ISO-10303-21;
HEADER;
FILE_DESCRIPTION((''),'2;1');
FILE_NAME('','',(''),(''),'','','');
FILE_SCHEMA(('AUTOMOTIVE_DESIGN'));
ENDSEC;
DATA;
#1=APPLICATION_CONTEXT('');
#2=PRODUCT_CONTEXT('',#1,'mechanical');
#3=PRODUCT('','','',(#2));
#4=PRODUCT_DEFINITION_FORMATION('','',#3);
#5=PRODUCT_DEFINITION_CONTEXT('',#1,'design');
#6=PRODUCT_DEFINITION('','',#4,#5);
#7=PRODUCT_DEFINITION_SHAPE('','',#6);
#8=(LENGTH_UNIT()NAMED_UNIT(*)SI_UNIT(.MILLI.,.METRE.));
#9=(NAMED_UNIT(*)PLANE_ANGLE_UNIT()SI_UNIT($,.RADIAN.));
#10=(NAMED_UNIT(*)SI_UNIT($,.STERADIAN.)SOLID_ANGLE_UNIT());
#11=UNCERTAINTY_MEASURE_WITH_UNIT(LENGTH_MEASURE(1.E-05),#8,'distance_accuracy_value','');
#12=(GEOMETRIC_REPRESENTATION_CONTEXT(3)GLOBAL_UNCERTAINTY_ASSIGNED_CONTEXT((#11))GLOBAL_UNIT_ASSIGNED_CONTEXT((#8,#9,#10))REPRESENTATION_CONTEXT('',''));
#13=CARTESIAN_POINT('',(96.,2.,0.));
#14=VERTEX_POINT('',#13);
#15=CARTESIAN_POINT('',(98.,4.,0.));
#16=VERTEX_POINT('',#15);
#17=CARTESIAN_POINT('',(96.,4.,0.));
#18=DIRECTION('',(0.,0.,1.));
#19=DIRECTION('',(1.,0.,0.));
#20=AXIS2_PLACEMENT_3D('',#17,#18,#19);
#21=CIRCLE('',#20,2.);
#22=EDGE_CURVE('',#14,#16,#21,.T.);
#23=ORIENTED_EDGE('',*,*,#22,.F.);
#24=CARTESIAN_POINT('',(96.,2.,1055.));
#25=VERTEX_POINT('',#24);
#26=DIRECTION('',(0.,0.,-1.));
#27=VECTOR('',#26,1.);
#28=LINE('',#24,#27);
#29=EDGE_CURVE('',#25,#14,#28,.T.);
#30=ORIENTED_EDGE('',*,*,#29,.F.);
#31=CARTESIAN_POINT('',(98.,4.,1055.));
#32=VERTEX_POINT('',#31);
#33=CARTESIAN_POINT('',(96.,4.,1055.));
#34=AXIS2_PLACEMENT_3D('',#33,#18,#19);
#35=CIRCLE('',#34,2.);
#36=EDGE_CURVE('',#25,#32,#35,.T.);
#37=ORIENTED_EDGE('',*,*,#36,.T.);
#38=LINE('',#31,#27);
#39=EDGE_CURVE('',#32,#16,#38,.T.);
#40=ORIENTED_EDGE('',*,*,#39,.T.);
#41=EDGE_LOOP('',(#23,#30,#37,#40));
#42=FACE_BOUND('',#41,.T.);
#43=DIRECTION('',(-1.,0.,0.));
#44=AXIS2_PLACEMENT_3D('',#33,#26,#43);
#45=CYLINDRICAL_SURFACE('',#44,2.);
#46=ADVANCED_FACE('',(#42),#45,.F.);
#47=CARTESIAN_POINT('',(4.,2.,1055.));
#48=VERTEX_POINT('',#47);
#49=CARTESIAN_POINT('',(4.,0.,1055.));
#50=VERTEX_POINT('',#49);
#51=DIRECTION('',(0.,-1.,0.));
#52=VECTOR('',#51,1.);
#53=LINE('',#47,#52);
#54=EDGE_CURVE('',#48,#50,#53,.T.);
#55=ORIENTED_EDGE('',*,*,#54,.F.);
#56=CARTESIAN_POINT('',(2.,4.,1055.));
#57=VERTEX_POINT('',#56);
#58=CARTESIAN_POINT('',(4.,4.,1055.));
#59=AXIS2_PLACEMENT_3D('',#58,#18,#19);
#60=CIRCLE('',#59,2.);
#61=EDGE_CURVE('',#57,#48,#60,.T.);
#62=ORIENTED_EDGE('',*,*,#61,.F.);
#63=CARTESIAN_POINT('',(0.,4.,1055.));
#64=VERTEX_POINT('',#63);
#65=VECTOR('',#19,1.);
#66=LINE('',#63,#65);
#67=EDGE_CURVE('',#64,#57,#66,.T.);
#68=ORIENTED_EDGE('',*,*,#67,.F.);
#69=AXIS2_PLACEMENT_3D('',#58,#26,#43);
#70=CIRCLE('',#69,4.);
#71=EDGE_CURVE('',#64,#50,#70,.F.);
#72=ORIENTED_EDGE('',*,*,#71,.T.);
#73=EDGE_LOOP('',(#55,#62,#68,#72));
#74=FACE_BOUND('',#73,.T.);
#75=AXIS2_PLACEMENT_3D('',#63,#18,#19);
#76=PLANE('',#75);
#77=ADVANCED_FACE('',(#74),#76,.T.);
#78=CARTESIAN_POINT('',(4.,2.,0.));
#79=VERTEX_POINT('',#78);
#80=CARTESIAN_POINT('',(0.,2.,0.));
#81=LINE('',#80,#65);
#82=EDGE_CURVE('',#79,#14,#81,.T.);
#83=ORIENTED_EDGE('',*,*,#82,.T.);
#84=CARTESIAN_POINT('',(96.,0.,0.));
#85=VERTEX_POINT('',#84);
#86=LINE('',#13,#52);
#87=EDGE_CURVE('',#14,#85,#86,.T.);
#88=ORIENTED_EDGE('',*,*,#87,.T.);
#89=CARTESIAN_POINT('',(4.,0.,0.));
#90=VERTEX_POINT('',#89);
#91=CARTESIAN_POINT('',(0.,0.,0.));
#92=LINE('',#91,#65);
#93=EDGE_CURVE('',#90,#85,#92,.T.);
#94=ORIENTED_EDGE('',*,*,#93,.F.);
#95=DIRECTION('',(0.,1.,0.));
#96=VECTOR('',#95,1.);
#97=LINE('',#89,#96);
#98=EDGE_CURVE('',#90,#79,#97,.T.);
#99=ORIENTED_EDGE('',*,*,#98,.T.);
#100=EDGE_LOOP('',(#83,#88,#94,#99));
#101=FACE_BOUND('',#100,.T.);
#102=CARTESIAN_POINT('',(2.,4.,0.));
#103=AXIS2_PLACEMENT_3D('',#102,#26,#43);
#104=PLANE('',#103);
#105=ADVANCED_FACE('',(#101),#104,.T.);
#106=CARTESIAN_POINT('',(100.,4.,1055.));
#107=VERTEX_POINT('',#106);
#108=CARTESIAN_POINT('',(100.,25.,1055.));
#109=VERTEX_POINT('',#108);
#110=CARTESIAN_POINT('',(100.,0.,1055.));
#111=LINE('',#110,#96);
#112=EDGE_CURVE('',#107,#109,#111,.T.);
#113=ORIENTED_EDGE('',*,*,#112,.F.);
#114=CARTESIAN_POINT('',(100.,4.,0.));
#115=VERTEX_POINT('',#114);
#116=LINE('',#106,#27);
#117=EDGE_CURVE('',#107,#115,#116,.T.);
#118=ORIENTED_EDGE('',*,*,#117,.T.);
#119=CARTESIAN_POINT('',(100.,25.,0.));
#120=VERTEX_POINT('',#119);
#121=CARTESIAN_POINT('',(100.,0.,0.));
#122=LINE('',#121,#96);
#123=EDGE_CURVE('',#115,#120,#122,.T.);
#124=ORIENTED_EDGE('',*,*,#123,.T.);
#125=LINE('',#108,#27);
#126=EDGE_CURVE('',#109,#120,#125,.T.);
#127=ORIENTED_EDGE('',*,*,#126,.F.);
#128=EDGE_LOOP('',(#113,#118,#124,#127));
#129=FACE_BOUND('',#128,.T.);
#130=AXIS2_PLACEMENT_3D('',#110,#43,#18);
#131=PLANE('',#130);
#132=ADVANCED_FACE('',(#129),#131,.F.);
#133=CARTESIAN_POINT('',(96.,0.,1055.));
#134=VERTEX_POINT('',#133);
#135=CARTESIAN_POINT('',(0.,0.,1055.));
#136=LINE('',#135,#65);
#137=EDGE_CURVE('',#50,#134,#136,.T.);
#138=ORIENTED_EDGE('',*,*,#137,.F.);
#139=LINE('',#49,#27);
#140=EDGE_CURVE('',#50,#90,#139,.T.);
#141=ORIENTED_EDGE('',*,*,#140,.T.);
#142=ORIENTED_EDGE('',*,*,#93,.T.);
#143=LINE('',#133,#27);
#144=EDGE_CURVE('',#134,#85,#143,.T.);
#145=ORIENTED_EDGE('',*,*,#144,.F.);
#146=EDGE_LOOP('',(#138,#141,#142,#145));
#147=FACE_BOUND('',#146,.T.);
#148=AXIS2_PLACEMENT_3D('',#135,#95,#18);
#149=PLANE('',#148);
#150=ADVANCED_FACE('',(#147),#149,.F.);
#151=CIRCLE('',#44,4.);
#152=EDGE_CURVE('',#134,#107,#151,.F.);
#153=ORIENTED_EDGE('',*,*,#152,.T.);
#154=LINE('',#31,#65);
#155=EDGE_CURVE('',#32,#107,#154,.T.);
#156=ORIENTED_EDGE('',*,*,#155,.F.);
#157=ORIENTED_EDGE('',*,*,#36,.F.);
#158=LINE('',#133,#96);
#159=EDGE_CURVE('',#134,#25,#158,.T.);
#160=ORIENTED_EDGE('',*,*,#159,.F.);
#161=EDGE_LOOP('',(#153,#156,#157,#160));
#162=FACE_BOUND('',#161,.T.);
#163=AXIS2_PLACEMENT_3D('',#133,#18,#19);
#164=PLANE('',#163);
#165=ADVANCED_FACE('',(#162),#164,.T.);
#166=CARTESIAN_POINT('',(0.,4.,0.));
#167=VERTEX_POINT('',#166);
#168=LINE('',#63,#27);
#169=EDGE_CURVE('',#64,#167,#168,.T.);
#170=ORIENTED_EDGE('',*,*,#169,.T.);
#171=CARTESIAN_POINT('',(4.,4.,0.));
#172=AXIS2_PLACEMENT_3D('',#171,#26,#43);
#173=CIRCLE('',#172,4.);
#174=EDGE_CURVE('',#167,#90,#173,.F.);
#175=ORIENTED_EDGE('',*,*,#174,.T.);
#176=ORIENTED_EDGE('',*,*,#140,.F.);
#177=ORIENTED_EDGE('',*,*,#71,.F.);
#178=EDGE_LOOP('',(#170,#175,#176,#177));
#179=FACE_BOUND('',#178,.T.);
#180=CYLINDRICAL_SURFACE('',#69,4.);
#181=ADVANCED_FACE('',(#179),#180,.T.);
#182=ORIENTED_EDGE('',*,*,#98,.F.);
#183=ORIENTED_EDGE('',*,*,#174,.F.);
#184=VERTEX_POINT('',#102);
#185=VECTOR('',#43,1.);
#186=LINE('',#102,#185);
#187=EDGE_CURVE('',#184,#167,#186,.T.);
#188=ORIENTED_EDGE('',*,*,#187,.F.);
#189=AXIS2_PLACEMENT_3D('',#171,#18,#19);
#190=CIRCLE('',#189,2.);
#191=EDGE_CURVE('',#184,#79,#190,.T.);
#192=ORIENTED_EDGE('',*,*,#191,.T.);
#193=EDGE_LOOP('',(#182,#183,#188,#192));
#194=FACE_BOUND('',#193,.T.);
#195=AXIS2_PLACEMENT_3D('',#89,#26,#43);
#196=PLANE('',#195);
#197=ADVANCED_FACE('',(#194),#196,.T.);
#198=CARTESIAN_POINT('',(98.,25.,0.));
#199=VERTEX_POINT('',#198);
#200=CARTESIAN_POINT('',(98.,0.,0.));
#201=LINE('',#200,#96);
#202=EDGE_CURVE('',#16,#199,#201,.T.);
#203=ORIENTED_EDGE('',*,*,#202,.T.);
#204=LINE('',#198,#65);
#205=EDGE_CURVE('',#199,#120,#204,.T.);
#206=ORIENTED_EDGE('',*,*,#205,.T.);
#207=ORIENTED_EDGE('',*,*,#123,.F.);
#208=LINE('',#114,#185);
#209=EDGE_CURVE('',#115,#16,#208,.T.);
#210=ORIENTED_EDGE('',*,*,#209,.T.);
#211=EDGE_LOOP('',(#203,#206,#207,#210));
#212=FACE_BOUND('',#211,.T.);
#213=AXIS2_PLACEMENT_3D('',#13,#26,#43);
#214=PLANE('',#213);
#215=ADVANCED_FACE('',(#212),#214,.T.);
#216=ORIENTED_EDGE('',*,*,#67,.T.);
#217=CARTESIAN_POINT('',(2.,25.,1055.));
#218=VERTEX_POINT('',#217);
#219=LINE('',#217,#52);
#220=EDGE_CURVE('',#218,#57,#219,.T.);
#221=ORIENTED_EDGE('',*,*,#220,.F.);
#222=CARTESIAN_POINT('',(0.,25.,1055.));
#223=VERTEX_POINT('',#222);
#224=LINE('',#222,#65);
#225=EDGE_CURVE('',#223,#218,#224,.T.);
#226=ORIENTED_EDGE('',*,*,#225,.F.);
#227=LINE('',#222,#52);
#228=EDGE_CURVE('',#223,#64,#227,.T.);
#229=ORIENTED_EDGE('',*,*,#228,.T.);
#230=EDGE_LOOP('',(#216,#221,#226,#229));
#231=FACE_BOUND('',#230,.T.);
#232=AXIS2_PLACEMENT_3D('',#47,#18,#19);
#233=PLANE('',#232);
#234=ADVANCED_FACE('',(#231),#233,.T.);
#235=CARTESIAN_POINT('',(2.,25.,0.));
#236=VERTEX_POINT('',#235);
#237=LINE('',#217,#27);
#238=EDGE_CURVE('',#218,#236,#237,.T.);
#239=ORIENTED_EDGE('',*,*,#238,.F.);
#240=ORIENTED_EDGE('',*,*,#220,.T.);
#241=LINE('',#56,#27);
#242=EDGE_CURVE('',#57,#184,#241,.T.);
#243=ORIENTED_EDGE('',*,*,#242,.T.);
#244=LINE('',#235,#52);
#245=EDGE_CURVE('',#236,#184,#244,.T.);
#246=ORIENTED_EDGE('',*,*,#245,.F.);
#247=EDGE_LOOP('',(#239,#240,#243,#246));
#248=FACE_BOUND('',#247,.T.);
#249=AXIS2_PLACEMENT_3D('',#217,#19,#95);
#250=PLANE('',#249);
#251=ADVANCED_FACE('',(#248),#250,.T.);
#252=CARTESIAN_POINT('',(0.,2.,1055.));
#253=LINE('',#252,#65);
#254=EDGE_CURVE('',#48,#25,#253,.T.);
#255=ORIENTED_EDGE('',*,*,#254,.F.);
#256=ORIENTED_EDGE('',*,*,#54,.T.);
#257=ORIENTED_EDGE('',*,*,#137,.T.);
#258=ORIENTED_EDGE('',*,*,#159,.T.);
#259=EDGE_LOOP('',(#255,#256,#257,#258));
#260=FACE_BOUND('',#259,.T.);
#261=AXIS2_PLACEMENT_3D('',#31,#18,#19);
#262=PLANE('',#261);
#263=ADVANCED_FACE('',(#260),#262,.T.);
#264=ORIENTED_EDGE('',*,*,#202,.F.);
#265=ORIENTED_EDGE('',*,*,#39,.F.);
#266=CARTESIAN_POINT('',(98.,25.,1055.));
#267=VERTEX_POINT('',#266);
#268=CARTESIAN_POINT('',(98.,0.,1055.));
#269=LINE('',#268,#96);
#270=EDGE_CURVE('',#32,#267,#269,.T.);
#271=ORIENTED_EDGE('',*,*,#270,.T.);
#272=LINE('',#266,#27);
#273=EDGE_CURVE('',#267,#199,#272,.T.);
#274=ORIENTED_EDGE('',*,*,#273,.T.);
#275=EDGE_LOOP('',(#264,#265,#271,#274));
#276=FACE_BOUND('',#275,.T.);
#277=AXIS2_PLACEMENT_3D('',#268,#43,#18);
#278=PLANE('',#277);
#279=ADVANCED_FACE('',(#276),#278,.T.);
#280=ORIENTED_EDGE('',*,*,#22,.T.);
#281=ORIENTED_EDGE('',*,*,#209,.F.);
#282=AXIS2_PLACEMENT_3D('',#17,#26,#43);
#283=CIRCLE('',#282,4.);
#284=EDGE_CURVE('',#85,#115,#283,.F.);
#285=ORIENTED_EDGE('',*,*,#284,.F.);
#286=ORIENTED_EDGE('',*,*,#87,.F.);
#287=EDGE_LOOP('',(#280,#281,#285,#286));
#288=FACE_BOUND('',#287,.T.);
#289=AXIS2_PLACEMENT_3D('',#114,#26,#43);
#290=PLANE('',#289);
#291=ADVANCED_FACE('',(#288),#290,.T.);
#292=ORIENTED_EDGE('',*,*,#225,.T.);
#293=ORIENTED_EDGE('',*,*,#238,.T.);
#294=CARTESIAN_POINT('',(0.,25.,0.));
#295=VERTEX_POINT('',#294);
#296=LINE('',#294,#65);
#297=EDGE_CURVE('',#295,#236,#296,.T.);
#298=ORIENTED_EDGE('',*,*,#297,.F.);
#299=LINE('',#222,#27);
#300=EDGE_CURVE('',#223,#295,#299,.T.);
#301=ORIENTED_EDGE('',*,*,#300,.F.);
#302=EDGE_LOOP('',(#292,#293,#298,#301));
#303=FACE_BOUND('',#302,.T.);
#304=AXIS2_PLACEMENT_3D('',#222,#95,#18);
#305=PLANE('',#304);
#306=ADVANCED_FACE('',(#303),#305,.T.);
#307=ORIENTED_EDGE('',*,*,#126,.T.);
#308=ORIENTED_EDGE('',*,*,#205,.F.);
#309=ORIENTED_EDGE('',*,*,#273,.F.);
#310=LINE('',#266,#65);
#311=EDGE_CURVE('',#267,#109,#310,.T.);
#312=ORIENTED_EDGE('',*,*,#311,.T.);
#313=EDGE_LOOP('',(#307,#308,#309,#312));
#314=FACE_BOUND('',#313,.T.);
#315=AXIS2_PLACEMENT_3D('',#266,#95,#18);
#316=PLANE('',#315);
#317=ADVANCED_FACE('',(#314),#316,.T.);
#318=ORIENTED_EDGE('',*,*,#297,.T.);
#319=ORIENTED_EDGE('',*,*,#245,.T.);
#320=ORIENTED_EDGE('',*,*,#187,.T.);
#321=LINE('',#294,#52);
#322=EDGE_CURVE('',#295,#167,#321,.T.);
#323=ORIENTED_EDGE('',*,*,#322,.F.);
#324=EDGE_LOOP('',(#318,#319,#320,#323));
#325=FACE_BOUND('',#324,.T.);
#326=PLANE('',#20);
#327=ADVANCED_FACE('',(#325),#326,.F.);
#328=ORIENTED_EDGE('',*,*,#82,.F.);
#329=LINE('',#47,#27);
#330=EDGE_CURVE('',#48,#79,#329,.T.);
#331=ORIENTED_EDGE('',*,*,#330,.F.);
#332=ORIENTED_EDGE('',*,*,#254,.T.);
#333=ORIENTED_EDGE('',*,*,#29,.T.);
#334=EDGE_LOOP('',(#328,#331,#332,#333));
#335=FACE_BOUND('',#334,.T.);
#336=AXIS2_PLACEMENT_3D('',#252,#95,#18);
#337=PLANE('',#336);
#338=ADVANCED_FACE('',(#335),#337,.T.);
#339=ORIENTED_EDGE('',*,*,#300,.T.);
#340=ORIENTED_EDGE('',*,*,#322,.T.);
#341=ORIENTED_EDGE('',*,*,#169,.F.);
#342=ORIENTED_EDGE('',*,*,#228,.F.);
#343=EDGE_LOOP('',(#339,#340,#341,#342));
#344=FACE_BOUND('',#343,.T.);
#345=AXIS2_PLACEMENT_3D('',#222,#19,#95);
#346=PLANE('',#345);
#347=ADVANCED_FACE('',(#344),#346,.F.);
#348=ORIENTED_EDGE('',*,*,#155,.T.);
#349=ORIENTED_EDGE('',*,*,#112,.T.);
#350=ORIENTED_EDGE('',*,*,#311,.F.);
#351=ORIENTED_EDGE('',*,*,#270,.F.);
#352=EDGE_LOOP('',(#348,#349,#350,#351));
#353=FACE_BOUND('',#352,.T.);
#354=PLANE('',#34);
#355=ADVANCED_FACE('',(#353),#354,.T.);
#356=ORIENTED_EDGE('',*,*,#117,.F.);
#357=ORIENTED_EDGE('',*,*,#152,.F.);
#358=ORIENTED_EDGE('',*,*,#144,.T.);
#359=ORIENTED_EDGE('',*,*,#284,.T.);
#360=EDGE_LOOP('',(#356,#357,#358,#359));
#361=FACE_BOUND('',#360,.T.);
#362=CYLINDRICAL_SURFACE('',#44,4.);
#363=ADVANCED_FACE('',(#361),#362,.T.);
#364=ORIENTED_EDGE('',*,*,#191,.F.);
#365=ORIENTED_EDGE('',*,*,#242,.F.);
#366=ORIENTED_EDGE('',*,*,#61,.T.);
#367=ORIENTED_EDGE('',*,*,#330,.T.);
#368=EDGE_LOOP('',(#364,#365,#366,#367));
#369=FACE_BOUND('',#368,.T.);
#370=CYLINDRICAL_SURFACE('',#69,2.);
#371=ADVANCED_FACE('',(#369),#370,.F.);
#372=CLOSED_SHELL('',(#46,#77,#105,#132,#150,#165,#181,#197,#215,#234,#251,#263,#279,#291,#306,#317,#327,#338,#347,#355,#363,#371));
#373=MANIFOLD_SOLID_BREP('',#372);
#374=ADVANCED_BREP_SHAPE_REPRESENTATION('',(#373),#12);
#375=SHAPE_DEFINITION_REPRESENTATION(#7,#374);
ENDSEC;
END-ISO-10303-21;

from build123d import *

# Parameters (mm, degrees)
BASE_FLANGE1_DEPTH = 1055


# Sheet-metal steps are written as plain solids
with BuildPart() as part:
    # Sketch1 → Base-Flange1 (new body)
    with BuildSketch(Plane.XY):
        with BuildLine():
            Line((0, 25), (0, 4))
            ThreePointArc((0, 4), (1.171572875, 1.171572875), (4, 0))
            Line((4, 0), (96, 0))
            ThreePointArc((96, 0), (98.828427125, 1.171572875), (100, 4))
            Line((100, 4), (100, 25))
            Line((100, 25), (98, 25))
            Line((98, 25), (98, 4))
            ThreePointArc((98, 4), (97.414213562, 2.585786438), (96, 2))
            Line((96, 2), (4, 2))
            ThreePointArc((4, 2), (2.585786438, 2.585786438), (2, 4))
            Line((2, 4), (2, 25))
            Line((2, 25), (0, 25))
        make_face()
    extrude(amount=BASE_FLANGE1_DEPTH)


solid = part.part
